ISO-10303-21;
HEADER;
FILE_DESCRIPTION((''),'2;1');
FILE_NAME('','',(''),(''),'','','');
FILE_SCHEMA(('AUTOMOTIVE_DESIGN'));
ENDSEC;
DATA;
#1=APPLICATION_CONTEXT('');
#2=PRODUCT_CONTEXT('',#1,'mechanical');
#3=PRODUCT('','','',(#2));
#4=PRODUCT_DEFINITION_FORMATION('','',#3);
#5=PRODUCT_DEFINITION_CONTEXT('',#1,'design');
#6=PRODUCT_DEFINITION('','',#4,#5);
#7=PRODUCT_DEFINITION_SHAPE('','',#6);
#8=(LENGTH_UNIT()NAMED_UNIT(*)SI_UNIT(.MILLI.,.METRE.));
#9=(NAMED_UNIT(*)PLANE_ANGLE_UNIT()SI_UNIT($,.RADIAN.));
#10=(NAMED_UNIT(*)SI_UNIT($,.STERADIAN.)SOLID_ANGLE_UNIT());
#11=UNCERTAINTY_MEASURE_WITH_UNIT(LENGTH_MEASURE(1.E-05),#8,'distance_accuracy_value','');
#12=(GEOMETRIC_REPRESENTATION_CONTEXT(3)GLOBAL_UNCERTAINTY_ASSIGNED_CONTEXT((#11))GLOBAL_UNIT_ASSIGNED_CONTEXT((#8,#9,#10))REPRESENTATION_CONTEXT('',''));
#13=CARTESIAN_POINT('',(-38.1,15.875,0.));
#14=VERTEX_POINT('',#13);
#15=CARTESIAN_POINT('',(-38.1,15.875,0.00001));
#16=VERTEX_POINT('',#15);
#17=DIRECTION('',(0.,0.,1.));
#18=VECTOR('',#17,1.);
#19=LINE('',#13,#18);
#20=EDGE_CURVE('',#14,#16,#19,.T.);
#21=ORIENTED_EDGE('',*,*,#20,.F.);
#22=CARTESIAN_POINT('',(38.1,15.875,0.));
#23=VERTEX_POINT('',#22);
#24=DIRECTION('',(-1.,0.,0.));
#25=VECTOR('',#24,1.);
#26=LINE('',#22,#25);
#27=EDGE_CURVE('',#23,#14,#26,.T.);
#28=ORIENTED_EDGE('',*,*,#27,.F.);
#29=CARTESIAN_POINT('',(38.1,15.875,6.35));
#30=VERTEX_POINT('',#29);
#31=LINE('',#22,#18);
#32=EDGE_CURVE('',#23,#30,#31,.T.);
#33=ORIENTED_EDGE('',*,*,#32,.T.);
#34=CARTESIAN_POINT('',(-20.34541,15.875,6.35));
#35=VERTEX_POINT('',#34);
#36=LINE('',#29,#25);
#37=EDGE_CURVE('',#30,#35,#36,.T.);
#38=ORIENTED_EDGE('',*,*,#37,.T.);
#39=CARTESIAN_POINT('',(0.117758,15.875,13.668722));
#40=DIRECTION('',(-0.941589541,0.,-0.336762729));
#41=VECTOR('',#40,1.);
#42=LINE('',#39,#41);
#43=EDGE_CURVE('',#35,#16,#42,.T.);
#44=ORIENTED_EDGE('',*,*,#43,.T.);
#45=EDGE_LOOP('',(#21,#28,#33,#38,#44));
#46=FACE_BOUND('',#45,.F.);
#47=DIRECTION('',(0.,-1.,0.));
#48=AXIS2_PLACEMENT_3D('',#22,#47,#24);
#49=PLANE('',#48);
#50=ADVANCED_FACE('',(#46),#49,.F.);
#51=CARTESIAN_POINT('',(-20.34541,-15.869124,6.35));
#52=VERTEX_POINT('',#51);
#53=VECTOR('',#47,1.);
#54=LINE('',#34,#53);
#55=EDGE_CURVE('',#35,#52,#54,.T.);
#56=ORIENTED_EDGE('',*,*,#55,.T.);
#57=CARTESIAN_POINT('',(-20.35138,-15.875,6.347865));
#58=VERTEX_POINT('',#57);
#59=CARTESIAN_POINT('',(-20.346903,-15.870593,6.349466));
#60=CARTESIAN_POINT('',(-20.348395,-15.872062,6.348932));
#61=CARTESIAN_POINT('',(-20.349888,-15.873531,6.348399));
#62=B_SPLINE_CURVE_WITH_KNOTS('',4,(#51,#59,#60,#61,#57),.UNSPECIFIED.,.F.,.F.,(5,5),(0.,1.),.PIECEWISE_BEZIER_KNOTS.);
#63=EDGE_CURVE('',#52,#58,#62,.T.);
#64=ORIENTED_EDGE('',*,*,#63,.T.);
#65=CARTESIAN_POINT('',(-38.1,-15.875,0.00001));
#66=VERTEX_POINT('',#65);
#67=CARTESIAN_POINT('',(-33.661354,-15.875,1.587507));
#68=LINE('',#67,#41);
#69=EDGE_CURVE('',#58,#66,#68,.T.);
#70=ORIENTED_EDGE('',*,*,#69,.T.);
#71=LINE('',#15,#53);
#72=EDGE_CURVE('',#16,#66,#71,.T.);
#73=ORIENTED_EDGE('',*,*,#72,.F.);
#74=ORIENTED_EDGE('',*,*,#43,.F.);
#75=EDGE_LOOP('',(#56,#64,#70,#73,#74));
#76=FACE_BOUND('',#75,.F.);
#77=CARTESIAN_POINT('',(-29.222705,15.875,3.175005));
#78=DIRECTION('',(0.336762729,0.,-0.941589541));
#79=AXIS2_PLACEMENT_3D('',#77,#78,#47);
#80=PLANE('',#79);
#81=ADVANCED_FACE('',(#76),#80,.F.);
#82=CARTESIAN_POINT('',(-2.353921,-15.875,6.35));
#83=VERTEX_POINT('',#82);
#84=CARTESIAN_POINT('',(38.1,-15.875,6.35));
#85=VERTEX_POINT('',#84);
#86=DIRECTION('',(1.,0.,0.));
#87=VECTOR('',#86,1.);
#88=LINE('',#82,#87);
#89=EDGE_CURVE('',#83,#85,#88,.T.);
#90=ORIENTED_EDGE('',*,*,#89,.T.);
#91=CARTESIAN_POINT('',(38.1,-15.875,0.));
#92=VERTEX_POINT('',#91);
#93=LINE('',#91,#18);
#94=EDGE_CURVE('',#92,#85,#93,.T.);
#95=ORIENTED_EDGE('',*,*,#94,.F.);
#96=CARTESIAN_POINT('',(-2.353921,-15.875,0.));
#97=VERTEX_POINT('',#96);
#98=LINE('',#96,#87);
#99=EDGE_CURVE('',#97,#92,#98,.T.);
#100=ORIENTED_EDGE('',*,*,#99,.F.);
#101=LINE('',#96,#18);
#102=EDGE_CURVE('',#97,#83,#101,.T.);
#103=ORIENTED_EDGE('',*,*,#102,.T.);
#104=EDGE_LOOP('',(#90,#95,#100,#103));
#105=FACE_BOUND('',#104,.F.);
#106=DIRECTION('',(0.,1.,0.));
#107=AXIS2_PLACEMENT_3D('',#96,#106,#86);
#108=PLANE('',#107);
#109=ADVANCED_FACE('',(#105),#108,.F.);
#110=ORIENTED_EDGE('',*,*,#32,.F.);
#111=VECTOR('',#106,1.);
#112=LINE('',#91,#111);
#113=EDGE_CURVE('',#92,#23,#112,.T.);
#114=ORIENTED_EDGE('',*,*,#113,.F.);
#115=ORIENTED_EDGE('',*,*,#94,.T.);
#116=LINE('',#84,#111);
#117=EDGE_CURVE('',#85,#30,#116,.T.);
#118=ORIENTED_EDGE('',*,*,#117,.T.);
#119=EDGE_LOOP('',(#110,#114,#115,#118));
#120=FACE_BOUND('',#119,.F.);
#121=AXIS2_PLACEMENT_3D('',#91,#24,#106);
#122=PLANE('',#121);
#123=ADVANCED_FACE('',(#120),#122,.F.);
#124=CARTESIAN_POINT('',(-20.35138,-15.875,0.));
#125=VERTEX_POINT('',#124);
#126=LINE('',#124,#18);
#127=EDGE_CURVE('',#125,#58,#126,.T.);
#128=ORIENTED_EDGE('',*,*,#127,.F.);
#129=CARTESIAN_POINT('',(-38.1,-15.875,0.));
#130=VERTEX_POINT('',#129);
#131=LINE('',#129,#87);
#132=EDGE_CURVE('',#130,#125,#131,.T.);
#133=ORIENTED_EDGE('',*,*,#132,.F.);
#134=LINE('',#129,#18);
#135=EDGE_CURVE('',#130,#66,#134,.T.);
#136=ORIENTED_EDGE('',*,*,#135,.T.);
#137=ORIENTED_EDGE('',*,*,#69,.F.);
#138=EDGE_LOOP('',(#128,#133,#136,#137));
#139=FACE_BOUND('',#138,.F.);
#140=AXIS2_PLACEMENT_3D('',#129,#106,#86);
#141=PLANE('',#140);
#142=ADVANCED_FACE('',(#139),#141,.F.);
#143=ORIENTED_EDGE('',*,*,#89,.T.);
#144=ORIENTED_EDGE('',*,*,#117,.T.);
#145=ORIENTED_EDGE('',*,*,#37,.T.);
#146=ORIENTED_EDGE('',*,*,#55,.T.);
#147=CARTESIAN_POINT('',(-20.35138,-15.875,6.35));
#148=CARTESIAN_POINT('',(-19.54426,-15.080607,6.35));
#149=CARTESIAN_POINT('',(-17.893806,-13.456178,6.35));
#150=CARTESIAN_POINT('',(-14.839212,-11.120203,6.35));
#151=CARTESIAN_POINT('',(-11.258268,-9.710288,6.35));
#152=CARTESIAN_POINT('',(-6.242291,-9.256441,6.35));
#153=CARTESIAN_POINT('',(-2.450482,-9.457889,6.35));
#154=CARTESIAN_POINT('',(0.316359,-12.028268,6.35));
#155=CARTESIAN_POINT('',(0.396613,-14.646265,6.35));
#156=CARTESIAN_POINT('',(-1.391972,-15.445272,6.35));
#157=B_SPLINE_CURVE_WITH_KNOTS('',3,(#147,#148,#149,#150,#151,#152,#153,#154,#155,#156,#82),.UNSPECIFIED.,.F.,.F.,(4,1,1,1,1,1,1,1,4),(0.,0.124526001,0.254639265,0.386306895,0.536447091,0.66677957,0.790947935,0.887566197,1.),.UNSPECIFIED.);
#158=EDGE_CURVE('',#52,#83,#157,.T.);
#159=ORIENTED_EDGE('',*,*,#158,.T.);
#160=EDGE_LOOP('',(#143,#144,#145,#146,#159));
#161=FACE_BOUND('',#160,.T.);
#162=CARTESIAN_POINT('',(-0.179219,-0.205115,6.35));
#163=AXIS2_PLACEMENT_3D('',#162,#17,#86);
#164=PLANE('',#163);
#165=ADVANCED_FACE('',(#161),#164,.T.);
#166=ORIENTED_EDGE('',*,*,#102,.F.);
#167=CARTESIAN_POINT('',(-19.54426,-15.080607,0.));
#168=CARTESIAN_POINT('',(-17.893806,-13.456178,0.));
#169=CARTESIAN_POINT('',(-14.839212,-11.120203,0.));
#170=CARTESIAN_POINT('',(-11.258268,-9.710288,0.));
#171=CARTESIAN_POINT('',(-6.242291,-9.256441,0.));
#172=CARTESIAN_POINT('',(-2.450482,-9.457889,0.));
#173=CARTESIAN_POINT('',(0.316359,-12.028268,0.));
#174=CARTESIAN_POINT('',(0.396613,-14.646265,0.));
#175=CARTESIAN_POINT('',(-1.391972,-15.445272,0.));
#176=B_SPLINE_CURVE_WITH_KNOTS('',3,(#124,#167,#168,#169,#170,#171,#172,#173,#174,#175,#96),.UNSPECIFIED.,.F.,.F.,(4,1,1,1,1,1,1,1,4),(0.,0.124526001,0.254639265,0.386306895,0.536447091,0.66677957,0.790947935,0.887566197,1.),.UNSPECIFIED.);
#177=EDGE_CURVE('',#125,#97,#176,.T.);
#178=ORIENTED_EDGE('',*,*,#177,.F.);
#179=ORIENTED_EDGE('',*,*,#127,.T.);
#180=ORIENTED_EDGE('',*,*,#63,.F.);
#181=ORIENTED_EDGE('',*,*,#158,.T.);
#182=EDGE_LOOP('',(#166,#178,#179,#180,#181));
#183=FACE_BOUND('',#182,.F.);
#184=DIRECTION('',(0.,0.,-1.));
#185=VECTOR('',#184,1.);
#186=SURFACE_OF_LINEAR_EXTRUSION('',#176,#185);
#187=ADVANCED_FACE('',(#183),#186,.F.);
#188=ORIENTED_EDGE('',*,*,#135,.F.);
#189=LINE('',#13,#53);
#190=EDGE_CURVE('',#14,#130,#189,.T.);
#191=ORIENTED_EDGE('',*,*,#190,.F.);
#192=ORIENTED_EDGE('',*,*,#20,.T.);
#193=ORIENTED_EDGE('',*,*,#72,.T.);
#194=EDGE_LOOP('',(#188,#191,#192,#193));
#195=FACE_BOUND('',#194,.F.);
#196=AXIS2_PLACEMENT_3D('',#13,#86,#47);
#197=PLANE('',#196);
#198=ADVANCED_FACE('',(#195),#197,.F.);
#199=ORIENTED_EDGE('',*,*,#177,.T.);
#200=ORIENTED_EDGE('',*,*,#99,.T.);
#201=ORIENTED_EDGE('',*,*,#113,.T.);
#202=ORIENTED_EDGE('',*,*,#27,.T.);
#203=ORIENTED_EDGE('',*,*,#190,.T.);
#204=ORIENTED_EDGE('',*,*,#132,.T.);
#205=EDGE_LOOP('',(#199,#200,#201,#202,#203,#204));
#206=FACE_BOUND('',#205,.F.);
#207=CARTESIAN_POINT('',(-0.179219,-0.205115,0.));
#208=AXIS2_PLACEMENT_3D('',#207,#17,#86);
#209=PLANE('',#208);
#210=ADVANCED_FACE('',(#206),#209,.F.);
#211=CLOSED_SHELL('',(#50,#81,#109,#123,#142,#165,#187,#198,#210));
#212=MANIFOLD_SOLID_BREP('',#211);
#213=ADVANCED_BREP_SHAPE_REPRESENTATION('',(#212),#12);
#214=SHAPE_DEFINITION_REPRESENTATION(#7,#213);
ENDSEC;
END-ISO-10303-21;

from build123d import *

# Parameters (mm, degrees)
F1_DEPTH = 6.35
F2_SIZE2 = 6.34999
F2_SIZE  = 17.75459


# Not quite as in the source:
# - a fillet or chamfer is up to 0.001 mm smaller than in the source, because OpenCascade refuses the exact size


with BuildPart() as f1:
    # F0 (on Top) → F1 (new body)
    with BuildSketch(Plane.XY):
        with BuildLine():
            Line((38.1, 15.875), (-38.1, 15.875))
            Line((-38.1, 15.875), (-38.1, -15.875))
            Line((-38.1, -15.875), (-20.3513801098, -15.875))
            add(Edge.make_bspline(
                [(-20.3513801098, -15.875), (-19.5442600635, -15.0806070794), (-17.8938059161, -13.4561782272), (-14.8392122853, -11.1202028199), (-11.2582679077, -9.7102875395), (-6.2422908773, -9.2564413312), (-2.450482189, -9.4578887631), (0.3163590299, -12.0282683935), (0.3966126589, -14.6462649088), (-1.3919718956, -15.4452723731), (-2.3539206013, -15.875)],
                knots=[0, 0, 0, 0, 0.1245260011, 0.2546392645, 0.3863068952, 0.5364470911, 0.6667795698, 0.7909479354, 0.8875661973, 1, 1, 1, 1], degree=3))
            Line((-2.3539206013, -15.875), (38.1, -15.875))
            Line((38.1, -15.875), (38.1, 15.875))
        make_face()
    extrude(amount=F1_DEPTH)

    # F2 (size 17.7546 and 6.35 in the source; OpenCascade refuses exactly that, so slightly less here)
    f2_edges = [f1.edges().sort_by_distance(p)[0] for p in [
        (-38.1, 0, 6.35),
    ]]
    f2_side = f1.faces().sort_by_distance((0.37676, 0.562053, 6.35))[0]
    chamfer(f2_edges, length=F2_SIZE, length2=F2_SIZE2, reference=f2_side)


solid = f1.part
